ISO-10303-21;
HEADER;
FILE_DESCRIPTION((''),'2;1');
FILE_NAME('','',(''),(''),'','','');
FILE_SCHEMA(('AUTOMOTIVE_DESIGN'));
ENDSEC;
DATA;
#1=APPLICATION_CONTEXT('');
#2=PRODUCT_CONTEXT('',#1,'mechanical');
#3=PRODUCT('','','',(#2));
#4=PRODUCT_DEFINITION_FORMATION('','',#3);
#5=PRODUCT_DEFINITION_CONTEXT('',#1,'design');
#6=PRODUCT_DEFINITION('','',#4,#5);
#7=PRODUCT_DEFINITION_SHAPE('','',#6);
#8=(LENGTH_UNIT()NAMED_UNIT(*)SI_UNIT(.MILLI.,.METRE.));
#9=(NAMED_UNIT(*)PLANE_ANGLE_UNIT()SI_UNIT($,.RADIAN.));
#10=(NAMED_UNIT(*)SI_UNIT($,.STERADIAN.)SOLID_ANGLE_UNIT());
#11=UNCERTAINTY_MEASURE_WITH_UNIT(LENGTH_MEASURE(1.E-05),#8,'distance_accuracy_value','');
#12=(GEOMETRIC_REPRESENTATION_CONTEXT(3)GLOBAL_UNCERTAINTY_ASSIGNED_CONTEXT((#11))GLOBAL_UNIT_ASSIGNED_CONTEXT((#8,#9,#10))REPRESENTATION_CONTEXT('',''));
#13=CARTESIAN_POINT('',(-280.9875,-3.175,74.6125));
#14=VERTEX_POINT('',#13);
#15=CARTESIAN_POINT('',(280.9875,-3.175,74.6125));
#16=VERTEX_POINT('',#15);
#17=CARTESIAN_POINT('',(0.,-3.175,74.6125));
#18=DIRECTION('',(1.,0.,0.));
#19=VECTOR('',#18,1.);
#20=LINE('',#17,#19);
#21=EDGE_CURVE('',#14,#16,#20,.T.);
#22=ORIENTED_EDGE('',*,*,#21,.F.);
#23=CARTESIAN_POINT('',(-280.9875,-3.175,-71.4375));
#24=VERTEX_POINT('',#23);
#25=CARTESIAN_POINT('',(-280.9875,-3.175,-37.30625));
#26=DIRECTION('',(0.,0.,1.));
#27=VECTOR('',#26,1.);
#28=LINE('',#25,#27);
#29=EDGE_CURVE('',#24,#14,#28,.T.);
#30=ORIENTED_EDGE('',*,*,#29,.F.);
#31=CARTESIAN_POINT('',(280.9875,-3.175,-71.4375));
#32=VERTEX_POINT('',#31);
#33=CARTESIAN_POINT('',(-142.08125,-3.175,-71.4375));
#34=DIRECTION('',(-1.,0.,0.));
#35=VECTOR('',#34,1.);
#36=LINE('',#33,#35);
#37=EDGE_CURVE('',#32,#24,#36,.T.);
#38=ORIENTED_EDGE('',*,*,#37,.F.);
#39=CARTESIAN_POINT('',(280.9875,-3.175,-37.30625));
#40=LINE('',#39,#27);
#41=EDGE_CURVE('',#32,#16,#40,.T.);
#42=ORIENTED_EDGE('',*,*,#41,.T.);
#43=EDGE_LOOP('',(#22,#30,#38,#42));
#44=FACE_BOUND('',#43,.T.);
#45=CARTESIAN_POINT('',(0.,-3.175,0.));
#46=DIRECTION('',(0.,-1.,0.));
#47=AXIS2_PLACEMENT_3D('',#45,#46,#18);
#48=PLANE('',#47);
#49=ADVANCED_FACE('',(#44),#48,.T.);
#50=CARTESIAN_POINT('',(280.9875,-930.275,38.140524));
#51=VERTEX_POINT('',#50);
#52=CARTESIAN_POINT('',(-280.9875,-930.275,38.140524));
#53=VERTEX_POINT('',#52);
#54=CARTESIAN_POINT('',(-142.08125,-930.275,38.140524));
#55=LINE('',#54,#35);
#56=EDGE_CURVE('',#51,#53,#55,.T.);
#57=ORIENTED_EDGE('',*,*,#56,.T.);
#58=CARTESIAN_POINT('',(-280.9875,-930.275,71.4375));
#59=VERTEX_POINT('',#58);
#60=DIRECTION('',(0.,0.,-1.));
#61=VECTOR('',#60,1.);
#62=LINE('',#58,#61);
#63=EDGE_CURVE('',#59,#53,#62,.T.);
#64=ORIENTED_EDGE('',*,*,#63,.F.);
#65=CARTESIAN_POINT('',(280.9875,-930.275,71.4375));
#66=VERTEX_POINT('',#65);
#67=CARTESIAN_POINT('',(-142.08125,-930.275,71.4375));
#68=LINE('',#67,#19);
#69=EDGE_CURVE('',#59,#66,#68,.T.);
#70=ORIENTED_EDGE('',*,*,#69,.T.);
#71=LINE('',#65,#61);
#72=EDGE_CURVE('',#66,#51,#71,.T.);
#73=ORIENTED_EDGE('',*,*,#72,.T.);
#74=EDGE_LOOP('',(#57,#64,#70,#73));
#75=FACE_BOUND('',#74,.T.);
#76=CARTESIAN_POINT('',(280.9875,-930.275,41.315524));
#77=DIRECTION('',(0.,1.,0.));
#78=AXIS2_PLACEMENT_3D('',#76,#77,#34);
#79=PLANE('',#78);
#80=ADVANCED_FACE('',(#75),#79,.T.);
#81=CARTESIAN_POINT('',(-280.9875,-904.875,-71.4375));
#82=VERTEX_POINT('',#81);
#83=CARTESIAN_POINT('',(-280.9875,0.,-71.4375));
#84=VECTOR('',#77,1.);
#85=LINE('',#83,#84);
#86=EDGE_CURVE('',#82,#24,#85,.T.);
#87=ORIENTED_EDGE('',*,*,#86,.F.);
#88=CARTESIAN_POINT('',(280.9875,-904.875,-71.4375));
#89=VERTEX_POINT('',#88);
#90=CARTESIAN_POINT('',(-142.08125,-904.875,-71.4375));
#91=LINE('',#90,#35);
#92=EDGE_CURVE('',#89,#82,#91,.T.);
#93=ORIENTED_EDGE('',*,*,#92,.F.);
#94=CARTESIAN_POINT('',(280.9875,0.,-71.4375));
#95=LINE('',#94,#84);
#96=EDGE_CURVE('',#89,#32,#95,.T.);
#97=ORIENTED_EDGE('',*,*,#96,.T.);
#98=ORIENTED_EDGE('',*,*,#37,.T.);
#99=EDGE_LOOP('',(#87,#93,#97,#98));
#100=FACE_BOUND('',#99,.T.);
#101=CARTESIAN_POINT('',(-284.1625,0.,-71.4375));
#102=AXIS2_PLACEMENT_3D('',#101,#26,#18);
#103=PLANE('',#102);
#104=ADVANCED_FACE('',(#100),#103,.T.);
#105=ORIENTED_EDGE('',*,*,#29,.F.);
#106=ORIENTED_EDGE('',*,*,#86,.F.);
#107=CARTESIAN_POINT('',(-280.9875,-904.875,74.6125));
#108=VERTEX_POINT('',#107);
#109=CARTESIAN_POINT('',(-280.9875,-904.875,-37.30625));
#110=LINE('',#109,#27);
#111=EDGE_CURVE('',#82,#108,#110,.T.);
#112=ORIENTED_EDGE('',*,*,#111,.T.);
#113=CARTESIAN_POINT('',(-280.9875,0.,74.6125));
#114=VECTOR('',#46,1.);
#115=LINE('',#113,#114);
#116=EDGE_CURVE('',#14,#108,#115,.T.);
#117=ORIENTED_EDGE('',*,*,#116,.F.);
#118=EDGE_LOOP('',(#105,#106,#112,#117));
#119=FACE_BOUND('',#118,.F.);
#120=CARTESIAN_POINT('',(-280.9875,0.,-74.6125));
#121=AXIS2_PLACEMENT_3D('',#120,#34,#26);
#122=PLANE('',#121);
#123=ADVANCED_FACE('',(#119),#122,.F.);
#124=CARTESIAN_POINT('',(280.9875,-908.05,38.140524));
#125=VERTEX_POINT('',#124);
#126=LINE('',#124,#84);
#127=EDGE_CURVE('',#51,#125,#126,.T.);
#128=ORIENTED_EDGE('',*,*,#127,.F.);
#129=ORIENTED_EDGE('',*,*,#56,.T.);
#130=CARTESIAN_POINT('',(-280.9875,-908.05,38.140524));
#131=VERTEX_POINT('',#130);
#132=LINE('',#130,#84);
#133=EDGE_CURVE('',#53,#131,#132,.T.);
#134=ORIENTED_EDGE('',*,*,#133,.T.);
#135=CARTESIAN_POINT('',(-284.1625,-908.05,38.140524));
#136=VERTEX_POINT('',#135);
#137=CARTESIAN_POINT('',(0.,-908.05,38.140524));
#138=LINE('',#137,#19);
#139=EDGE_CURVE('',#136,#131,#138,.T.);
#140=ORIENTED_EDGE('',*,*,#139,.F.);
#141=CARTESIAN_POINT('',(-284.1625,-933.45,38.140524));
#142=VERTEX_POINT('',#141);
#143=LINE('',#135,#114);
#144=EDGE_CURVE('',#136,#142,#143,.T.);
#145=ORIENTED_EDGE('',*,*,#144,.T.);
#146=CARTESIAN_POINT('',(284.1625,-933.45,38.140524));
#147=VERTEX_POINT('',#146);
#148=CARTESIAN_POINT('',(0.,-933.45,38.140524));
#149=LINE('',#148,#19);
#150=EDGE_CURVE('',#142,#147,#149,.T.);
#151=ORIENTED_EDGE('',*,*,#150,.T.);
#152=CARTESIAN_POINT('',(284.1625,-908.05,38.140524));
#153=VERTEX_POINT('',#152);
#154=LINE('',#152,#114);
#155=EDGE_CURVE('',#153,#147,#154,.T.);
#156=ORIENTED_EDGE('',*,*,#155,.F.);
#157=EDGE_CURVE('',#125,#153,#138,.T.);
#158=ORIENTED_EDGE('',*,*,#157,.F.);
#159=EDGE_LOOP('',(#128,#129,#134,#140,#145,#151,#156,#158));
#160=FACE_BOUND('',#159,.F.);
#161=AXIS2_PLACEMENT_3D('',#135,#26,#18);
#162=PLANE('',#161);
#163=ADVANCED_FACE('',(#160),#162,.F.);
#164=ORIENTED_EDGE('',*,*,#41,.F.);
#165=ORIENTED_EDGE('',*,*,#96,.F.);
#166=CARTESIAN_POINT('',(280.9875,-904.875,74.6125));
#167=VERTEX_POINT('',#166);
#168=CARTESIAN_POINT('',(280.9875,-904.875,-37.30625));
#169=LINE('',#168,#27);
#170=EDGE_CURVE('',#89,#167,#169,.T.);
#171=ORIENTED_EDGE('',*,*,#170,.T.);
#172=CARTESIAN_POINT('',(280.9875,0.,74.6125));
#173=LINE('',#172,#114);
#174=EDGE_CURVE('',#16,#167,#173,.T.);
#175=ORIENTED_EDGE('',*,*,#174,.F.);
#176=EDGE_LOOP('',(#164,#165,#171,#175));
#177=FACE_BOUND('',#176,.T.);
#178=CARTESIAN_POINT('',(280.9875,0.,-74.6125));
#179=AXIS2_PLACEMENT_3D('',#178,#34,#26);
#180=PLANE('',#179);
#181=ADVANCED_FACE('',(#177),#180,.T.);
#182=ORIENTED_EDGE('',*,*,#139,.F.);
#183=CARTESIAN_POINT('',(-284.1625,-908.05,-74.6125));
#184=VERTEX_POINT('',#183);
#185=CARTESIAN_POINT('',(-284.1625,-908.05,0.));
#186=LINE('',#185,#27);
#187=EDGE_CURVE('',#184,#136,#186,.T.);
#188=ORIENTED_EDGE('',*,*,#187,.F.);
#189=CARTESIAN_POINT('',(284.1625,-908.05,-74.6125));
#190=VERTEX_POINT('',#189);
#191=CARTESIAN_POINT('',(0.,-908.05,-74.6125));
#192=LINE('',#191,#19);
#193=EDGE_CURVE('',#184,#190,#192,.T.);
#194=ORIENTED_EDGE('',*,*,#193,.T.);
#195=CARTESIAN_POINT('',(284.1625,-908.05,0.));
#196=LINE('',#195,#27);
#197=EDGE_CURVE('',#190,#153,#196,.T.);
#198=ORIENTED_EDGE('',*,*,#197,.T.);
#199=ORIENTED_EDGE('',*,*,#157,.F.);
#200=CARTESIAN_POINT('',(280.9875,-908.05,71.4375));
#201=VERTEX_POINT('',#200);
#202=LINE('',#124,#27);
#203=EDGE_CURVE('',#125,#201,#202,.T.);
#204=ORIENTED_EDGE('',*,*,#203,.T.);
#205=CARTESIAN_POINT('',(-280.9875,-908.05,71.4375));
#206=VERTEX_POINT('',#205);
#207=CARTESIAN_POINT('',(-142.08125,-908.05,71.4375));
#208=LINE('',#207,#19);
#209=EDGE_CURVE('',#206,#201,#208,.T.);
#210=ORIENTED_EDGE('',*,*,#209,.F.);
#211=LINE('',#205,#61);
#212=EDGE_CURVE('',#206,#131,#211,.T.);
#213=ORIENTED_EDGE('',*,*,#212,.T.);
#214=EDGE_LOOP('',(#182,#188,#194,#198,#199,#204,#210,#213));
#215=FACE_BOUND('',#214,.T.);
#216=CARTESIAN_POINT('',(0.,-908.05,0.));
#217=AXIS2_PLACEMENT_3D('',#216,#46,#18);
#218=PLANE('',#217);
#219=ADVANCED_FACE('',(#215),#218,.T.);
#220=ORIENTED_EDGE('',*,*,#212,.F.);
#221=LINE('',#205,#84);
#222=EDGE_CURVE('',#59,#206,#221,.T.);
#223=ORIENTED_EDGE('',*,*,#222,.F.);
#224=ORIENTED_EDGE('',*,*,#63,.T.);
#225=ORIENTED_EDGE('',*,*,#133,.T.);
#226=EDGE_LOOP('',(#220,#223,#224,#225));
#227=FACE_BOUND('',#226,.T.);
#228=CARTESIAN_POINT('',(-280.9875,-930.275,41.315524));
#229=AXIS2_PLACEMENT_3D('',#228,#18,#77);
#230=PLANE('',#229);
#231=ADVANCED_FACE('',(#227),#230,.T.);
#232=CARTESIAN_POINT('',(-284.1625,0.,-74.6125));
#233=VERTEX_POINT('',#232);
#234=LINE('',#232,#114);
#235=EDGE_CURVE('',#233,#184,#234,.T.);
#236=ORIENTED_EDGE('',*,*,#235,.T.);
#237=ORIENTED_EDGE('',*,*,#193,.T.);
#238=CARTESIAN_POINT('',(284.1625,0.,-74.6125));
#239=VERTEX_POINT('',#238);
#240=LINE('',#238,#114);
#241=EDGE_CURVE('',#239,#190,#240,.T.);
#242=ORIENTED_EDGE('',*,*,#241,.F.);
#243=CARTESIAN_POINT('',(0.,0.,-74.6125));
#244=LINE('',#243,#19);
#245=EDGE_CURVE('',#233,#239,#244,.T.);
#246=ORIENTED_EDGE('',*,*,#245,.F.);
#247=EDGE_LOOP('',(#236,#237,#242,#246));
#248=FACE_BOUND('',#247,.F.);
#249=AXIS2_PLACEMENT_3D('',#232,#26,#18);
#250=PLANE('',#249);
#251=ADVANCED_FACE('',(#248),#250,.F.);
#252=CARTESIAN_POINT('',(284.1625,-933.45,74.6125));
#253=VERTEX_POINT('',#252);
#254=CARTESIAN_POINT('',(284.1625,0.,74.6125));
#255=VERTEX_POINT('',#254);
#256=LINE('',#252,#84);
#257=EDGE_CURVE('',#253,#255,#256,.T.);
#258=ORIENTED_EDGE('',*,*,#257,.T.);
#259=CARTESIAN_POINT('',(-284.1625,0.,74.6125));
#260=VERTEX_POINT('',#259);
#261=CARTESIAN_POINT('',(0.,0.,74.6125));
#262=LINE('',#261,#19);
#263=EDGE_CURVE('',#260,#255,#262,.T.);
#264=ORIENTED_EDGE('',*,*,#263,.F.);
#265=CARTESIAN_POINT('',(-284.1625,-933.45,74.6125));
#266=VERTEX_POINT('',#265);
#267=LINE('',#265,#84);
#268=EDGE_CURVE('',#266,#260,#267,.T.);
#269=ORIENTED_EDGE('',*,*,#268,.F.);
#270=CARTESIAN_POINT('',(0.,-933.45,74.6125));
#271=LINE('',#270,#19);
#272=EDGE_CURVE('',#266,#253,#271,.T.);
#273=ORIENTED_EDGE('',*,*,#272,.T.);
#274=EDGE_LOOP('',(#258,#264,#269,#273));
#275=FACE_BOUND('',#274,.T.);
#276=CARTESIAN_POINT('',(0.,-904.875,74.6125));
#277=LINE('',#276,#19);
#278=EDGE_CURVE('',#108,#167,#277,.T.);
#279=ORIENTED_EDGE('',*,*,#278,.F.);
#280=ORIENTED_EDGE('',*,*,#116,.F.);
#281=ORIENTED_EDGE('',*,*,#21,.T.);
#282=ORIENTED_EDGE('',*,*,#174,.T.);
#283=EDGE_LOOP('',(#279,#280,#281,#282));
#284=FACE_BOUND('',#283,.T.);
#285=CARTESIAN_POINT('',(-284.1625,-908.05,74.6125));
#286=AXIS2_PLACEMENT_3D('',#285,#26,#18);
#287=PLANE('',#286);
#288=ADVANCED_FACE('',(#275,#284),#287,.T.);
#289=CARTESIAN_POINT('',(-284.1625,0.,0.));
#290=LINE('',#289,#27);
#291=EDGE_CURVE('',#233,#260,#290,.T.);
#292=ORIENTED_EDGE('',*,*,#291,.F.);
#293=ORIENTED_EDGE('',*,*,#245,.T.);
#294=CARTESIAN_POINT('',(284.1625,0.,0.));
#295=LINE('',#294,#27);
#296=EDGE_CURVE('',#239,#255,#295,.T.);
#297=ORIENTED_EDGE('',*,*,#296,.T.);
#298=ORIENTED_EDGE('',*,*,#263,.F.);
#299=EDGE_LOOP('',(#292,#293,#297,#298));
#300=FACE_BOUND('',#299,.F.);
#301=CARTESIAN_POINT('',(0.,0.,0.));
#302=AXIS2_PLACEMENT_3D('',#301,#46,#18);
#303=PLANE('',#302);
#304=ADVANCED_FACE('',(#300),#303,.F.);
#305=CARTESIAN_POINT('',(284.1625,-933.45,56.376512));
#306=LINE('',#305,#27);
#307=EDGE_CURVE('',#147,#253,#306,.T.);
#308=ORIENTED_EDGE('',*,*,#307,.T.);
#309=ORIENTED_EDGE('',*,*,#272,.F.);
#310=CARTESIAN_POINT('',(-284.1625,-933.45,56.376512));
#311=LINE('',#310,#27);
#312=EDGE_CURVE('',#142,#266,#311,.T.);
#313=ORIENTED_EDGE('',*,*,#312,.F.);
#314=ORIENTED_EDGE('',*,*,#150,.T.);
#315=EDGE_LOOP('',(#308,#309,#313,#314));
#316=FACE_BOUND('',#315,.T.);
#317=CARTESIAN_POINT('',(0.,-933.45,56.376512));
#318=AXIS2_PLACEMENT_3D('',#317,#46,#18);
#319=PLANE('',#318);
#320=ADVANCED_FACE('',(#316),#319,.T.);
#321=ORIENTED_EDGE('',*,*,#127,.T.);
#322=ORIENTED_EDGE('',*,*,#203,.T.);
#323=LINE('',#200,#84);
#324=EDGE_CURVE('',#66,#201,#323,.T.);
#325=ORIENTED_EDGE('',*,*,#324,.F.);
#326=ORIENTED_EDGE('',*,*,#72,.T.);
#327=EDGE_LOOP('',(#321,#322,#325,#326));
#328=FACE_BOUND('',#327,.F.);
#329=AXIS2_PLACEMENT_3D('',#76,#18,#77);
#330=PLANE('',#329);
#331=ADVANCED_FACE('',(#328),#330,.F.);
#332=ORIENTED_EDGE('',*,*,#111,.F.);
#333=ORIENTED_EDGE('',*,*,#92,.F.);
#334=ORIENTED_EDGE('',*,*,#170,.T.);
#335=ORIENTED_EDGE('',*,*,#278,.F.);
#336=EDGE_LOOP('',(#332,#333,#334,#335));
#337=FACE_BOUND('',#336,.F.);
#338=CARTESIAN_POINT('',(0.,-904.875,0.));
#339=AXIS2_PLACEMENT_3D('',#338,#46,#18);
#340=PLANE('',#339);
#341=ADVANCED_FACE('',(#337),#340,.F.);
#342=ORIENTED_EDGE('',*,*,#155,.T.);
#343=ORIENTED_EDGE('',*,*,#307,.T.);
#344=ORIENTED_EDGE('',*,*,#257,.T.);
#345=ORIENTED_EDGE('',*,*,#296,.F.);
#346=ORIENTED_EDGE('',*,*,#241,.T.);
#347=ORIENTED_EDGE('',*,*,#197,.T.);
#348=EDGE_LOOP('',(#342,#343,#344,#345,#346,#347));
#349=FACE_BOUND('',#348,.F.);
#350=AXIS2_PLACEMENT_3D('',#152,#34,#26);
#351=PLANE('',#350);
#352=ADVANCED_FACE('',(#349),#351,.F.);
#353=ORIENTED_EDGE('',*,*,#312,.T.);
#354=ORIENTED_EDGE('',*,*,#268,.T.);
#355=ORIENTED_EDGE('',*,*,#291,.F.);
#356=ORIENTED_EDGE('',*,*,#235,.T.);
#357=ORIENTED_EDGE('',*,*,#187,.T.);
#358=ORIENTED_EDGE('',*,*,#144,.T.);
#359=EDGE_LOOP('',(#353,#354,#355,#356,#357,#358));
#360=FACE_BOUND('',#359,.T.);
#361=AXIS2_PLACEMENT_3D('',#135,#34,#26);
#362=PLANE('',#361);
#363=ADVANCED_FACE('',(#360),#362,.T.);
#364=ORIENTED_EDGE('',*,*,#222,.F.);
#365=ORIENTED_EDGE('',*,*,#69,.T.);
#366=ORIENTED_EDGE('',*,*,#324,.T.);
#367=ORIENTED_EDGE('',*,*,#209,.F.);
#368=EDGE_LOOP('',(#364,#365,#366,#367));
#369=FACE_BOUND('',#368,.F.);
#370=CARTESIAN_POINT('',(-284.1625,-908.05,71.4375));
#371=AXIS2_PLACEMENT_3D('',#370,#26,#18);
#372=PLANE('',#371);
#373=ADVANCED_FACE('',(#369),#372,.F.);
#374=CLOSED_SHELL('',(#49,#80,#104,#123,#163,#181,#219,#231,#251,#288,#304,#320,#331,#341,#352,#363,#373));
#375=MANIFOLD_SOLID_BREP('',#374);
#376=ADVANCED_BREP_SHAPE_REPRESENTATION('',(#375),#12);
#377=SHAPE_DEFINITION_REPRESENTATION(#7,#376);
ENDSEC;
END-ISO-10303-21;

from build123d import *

# Parameters (mm, degrees)
F0_W     = 568.325
F0_H     = 149.225
F1_DEPTH = 908.05
F2_T     = -3.175
F3_W     = 568.325
F3_H     = 36.4719758213
F4_DEPTH = 25.4
F5_T     = -3.175


# Not quite as in the source:
# - a shell that OpenCascade refuses in one call is made with other operations: the cavity is built on its own and cut out


with BuildPart() as f1:
    # F0 (on Front) → F1 (new body)
    with BuildSketch(Plane.XZ):
        Rectangle(F0_W, F0_H)
    extrude(amount=F1_DEPTH)

    # F2
    f2_openings = [f1.faces().sort_by_distance(p)[0] for p in [
        (0, -454.025, 74.6125),
    ]]
    offset(amount=F2_T, openings=f2_openings)

    # F3 (on face) → F4 (join)
    with BuildSketch(Plane.XZ.offset(908.05)):
        with Locations((0, 56.3765120894)):
            Rectangle(F3_W, F3_H)
    extrude(amount=F4_DEPTH)

    # F5: a shell. OpenCascade refuses it in one call, so the cavity is built on its own and cut out:
    # the body offset inwards by the wall thickness, plus a prism from it out through each open face.
    f5_core = offset(f1.part, amount=F5_T, kind=Kind.INTERSECTION, mode=Mode.PRIVATE)
    f5_exits = [f5_core.faces().sort_by_distance(p)[0] for p in [
        (0, -919.1625, 41.315524),
    ]]
    add(f5_core, mode=Mode.SUBTRACT)
    extrude(f5_exits, amount=-F5_T, mode=Mode.SUBTRACT)


solid = f1.part
